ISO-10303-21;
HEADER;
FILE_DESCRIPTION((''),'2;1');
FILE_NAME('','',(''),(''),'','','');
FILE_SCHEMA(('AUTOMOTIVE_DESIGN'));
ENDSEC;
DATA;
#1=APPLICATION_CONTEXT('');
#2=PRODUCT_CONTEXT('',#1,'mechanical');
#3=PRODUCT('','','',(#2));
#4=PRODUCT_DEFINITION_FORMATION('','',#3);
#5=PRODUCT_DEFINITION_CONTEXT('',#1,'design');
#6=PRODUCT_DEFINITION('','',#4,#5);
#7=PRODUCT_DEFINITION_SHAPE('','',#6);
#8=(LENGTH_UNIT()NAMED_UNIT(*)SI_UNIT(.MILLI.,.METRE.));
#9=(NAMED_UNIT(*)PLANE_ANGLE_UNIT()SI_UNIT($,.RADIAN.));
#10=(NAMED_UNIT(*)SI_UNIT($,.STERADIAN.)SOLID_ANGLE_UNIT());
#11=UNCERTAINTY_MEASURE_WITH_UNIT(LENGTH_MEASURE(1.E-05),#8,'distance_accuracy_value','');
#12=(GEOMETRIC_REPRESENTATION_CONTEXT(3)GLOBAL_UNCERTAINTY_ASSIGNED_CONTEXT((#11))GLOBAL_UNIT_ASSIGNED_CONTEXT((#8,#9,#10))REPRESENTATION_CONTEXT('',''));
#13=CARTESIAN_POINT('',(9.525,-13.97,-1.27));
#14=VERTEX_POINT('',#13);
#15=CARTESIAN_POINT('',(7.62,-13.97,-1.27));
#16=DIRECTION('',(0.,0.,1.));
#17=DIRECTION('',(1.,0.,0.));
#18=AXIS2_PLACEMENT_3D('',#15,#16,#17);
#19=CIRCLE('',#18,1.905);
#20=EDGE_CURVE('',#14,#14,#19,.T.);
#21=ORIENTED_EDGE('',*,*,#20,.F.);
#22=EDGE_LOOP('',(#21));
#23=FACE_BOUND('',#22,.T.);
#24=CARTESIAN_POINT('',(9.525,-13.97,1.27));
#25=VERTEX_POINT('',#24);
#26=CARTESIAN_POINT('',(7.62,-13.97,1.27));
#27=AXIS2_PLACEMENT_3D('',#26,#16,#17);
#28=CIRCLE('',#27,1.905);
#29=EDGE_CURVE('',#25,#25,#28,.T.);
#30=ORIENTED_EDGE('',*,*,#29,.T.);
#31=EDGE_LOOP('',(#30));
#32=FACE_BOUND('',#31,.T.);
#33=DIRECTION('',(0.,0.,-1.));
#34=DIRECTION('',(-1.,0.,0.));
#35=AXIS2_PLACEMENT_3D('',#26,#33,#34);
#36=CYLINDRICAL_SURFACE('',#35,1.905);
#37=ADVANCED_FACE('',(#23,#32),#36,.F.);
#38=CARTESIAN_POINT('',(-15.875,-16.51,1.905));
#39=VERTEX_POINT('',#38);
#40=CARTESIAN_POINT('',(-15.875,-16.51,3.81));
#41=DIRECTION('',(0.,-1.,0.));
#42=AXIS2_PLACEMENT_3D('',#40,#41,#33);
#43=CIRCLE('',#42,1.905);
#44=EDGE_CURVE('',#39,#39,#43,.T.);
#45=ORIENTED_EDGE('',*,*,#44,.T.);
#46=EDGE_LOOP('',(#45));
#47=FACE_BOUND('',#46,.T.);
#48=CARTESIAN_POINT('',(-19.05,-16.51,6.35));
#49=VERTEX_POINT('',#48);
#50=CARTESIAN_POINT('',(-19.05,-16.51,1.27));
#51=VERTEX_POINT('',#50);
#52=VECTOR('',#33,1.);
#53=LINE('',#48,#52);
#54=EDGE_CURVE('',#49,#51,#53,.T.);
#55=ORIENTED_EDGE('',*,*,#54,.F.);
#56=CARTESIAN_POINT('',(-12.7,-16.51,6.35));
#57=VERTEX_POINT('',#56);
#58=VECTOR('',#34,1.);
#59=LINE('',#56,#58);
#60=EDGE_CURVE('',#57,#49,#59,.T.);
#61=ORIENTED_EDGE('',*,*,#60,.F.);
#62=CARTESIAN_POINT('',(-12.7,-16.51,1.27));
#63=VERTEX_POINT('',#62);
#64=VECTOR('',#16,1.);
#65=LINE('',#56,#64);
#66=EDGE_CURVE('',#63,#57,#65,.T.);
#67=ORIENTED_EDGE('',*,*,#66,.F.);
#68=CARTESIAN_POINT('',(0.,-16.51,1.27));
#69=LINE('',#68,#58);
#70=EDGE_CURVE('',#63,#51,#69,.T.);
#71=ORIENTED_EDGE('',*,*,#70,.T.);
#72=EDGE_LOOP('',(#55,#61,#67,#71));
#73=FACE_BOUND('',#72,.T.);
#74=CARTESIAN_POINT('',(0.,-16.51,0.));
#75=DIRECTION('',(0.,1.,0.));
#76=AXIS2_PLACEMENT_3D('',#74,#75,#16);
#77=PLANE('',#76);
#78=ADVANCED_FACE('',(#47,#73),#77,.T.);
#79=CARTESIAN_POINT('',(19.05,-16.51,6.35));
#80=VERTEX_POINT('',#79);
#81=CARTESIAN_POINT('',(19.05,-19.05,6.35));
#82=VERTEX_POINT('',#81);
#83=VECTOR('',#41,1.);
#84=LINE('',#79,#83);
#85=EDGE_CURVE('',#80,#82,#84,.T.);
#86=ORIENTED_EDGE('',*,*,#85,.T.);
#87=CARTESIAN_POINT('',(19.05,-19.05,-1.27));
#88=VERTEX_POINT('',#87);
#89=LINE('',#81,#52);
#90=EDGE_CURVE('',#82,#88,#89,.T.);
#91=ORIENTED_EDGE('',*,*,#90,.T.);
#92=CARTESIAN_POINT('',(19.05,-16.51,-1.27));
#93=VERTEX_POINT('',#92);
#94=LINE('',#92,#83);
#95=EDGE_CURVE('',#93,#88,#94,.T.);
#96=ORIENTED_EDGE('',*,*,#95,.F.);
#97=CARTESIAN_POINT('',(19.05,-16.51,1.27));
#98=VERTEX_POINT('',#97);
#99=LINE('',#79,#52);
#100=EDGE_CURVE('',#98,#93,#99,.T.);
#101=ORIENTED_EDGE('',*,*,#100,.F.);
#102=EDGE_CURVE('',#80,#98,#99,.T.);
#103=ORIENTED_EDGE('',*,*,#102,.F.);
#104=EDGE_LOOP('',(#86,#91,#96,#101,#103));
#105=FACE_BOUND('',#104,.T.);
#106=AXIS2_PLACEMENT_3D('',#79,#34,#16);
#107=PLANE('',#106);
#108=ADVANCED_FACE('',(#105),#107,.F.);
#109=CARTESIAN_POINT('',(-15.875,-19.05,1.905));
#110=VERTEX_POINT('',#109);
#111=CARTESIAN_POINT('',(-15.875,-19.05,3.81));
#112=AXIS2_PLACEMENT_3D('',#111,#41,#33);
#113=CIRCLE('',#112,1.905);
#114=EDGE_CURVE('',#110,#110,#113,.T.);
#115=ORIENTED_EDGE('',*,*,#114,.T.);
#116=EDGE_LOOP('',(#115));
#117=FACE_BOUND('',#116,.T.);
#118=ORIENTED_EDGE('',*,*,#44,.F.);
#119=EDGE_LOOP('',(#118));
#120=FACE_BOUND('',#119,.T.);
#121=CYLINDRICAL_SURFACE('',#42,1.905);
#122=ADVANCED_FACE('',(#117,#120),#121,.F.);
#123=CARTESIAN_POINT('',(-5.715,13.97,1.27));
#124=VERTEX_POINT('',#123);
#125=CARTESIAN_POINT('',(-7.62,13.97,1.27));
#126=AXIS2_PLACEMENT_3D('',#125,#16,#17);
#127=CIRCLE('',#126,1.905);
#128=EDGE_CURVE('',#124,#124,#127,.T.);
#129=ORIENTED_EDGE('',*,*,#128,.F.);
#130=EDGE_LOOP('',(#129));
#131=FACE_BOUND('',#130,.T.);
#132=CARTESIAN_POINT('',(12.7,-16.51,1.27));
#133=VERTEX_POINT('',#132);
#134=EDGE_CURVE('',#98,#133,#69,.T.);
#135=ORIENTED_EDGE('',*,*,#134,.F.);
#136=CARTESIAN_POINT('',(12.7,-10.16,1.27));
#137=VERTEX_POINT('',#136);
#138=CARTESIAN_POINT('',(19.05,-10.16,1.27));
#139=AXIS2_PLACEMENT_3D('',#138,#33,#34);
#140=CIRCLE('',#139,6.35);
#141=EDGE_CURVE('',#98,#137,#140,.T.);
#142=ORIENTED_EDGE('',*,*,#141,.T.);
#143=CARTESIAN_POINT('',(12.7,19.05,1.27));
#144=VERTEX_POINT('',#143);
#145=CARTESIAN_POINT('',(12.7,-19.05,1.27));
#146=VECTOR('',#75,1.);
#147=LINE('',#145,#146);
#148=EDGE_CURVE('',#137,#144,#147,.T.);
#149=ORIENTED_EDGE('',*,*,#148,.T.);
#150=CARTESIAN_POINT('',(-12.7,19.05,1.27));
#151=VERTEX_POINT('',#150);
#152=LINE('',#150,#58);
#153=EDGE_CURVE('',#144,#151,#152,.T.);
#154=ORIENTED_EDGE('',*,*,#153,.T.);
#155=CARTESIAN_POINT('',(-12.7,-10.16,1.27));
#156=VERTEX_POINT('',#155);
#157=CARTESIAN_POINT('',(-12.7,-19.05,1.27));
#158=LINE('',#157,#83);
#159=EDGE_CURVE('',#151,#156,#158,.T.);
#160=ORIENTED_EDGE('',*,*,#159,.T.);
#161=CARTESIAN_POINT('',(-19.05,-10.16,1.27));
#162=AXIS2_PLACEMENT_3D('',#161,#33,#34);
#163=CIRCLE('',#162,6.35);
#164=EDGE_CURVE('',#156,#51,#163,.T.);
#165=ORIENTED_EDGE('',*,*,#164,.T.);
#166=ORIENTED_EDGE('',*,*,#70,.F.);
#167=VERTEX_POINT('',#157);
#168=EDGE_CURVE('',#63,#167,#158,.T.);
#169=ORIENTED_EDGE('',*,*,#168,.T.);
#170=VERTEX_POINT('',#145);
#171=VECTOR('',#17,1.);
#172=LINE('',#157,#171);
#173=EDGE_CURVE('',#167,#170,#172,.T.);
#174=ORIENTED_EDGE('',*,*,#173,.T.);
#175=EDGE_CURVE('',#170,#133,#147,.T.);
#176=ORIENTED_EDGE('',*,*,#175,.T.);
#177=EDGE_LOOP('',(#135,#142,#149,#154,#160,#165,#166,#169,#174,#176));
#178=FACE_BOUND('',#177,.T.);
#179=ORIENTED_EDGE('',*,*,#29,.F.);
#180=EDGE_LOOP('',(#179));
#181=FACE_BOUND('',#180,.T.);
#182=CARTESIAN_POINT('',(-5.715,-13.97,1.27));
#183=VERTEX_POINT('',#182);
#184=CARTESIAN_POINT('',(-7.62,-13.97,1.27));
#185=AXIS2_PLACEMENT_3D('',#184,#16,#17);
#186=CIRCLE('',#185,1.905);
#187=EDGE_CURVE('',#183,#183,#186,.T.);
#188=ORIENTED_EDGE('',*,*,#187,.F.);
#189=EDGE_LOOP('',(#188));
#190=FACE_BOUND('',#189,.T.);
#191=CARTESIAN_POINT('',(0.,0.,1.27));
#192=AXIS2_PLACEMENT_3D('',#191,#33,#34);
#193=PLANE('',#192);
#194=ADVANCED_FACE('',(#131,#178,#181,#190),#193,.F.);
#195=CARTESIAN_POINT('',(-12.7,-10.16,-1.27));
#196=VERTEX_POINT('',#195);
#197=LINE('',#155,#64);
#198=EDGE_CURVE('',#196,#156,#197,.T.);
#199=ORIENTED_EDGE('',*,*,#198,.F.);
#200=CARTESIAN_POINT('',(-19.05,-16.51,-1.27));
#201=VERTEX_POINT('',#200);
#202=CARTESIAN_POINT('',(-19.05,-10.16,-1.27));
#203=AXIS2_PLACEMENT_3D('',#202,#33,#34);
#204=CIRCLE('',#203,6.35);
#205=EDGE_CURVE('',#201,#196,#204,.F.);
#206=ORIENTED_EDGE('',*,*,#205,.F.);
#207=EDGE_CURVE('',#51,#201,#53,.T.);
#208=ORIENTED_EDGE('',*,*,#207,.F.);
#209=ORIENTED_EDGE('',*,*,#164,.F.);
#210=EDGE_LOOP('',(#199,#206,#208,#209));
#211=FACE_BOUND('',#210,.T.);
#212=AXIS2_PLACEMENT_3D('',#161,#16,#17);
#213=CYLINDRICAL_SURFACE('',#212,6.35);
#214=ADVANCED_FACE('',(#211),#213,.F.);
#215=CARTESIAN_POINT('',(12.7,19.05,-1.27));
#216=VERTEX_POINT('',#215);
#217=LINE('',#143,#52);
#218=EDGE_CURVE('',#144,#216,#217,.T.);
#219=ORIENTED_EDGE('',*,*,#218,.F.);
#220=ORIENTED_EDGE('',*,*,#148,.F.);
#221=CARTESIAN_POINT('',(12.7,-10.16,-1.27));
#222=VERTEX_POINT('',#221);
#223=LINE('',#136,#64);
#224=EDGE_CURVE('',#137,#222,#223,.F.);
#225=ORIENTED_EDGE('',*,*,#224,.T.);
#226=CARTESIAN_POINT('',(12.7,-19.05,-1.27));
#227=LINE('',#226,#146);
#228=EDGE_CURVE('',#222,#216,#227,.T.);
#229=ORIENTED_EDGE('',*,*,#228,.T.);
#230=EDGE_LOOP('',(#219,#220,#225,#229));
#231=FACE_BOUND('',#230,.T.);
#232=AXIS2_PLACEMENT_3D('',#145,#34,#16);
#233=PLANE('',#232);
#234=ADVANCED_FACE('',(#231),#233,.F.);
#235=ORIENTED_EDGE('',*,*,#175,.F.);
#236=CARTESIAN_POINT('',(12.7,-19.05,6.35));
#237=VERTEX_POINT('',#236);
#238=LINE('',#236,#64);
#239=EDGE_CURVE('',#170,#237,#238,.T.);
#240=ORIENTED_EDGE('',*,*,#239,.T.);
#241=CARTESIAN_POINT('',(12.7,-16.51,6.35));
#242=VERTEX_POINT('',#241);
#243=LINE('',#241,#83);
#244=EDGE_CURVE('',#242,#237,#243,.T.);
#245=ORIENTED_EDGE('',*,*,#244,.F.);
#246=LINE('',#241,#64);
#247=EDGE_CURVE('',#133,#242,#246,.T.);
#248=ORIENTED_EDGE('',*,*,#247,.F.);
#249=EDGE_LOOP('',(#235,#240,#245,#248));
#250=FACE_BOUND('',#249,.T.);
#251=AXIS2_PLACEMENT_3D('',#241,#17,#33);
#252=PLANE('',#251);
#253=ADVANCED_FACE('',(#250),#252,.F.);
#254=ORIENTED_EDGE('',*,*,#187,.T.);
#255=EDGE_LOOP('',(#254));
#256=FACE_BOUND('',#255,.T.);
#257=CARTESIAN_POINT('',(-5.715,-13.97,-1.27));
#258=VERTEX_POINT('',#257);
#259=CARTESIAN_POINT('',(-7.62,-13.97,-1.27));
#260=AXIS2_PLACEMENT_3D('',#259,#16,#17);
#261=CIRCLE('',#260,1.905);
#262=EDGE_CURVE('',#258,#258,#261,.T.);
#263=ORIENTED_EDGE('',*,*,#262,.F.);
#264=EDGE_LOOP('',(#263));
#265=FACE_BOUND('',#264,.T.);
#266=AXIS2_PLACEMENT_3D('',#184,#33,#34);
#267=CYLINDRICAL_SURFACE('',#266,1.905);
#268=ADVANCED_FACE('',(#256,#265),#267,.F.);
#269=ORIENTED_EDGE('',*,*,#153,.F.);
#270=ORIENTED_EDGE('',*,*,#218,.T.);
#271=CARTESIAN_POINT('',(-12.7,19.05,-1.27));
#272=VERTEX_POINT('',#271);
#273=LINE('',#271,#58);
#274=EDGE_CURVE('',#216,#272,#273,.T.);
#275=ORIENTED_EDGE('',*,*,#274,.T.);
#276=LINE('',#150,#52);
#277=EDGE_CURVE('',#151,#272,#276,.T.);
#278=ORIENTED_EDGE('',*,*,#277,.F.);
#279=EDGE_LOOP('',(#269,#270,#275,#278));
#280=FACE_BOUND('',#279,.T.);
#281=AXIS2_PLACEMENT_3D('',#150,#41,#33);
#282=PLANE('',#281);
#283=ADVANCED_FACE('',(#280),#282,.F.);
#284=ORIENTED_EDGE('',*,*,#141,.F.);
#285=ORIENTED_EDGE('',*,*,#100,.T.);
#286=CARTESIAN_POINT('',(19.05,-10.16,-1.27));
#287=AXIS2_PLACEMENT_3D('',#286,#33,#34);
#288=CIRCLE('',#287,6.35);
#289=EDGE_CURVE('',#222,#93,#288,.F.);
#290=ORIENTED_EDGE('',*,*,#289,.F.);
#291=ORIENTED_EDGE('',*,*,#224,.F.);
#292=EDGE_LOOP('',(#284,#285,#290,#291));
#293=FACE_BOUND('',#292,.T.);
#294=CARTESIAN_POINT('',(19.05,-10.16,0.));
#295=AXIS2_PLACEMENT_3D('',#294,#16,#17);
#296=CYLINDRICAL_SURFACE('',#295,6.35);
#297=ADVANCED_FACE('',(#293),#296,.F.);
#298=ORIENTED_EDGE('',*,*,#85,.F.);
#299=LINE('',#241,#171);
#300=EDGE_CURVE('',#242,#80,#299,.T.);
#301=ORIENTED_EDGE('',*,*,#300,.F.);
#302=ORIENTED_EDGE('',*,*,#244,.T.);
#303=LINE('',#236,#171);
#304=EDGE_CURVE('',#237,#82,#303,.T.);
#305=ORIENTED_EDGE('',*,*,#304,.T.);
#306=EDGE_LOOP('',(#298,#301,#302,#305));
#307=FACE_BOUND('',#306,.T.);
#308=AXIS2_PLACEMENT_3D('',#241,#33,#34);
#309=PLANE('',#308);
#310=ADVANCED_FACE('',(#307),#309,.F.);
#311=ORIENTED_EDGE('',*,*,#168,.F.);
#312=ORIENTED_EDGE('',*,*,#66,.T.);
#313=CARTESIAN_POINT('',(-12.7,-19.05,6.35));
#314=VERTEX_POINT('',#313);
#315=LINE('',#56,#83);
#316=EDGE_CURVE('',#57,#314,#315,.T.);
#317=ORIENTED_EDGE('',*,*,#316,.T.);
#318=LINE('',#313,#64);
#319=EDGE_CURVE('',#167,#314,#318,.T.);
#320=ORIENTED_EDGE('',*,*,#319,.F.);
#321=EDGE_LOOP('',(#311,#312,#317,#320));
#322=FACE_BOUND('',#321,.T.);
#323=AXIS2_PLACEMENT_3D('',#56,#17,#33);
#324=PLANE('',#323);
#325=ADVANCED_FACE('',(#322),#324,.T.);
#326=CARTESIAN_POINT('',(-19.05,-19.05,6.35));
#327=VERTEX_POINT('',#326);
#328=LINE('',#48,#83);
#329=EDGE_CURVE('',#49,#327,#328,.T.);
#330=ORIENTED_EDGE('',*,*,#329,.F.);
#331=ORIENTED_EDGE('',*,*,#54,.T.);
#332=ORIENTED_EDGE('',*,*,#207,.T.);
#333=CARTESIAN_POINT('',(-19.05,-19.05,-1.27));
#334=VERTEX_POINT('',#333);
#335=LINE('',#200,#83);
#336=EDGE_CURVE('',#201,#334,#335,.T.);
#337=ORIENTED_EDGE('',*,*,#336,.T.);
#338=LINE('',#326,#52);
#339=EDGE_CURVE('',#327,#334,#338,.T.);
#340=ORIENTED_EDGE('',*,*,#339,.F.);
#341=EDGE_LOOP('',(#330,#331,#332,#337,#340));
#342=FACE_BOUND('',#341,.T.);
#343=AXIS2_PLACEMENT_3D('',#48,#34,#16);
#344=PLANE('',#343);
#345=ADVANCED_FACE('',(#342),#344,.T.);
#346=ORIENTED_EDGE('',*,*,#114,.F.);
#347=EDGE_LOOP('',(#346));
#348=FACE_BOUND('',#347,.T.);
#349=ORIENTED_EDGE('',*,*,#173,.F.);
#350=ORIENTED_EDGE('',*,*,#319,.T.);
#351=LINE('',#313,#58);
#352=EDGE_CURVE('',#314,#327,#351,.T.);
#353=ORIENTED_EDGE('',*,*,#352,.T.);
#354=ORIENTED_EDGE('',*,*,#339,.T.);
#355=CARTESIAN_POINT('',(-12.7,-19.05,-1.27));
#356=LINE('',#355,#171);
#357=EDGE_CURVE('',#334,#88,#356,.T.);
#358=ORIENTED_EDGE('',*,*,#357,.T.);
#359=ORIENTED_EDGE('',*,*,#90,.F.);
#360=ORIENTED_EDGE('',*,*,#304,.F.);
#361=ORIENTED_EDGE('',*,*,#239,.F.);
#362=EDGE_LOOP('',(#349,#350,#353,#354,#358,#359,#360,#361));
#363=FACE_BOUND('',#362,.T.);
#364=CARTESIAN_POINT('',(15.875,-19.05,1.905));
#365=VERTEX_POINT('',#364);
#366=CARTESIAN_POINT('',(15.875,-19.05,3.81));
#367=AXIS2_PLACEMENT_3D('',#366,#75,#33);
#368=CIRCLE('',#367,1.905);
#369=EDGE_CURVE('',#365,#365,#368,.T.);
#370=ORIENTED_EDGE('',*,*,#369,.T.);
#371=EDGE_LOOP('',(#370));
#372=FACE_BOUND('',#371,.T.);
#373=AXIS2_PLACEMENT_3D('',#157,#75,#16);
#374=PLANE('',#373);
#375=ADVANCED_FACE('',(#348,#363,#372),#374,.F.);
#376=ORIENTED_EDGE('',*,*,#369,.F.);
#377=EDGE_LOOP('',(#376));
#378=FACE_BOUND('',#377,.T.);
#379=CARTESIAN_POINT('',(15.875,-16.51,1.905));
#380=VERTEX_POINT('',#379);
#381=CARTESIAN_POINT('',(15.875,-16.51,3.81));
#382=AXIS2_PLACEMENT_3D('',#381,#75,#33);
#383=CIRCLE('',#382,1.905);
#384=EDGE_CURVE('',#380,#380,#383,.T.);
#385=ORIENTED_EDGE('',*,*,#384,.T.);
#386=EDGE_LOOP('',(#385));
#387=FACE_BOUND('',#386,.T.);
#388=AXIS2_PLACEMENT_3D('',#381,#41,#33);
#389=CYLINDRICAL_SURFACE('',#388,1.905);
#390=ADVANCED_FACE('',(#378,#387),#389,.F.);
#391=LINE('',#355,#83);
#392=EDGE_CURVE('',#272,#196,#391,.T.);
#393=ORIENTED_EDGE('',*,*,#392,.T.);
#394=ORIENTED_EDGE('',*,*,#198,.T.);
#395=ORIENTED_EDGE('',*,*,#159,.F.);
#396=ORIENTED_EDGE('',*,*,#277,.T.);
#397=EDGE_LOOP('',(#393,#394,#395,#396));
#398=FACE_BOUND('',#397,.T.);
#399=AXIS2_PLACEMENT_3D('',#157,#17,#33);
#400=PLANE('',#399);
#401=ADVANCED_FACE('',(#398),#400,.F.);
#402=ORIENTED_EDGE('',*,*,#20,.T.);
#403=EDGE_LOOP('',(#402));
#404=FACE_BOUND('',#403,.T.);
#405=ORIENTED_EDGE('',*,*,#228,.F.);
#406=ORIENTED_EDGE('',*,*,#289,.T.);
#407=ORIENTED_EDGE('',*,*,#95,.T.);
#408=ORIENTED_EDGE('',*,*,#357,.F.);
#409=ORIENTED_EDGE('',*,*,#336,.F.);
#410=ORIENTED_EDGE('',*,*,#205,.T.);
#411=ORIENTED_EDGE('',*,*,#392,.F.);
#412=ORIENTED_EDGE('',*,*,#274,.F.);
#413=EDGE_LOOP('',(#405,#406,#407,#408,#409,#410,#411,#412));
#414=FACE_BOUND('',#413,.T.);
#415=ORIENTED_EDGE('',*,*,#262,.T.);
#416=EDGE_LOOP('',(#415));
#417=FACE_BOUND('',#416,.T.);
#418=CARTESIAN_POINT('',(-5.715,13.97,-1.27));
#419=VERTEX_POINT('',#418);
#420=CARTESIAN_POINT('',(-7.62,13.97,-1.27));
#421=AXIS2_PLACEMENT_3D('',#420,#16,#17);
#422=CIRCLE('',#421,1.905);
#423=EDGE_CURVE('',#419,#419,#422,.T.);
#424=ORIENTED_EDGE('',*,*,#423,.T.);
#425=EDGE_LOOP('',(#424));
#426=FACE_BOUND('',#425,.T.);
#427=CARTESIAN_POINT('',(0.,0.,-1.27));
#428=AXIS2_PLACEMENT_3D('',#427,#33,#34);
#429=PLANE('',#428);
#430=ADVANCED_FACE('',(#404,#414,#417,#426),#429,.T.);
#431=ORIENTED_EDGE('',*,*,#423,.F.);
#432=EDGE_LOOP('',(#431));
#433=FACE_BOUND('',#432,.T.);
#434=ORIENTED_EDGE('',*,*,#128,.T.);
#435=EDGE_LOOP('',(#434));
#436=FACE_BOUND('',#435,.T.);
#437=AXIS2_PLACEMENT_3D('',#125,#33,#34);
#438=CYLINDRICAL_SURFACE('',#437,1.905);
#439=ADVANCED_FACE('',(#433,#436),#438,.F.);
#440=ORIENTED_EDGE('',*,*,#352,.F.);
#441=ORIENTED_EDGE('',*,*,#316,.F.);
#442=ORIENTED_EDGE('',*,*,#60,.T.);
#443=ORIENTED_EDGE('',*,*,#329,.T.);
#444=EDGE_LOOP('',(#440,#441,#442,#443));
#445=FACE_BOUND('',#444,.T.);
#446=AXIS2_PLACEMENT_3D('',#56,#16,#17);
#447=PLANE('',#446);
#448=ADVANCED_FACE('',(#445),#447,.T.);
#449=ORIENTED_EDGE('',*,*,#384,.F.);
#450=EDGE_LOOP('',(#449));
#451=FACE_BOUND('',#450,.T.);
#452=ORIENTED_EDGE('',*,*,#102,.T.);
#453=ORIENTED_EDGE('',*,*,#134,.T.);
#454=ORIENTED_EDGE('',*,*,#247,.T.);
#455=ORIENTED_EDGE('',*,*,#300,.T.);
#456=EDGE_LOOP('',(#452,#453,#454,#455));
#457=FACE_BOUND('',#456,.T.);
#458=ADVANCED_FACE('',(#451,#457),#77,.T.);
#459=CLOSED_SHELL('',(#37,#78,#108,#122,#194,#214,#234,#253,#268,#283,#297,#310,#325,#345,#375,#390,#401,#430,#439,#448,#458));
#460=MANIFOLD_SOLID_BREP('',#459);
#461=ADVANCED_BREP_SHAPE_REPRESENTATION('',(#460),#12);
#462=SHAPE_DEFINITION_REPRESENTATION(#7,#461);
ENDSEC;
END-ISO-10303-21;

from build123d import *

# Parameters (mm, degrees)
SKETCH1_W           = 25.4
SKETCH1_H           = 38.1
SKETCH1_R           = 1.905
BOSS_EXTRUDE1_DEPTH = 1.27
SKETCH2_W           = 6.35
SKETCH2_H           = 7.62
SKETCH2_R           = 1.905
BOSS_EXTRUDE2_DEPTH = 2.54
FILLET1_R           = 6.35


with BuildPart() as part:
    # Sketch1 → Boss-Extrude1 (new, symmetric)
    with BuildSketch(Plane.XY):
        Rectangle(SKETCH1_W, SKETCH1_H)
        with Locations((-7.62, 13.97)):
            Circle(SKETCH1_R, mode=Mode.SUBTRACT)
        with Locations((-7.62, -13.97)):
            Circle(SKETCH1_R, mode=Mode.SUBTRACT)
        with Locations((7.62, -13.97)):
            Circle(SKETCH1_R, mode=Mode.SUBTRACT)
    extrude(amount=BOSS_EXTRUDE1_DEPTH, both=True)

    # Sketch2 → Boss-Extrude2 (add)
    with BuildSketch(Plane.XZ.offset(19.05)):
        with Locations((-15.875, 2.54)):
            Rectangle(SKETCH2_W, SKETCH2_H)
        with Locations(Location((-15.875, 3.81, 0), (0, 0, 270))):
            Circle(SKETCH2_R, mode=Mode.SUBTRACT)
    boss_extrude2 = extrude(amount=-BOSS_EXTRUDE2_DEPTH)

    # Mirror5: Boss-Extrude2 across plane
    add(boss_extrude2.mirror(Plane(origin=(0, 0, 0), x_dir=(0, 0, 1), z_dir=(1, 0, 0))))

    # Fillet1
    fillet1_edges = [part.edges().sort_by_distance(p)[0] for p in [
        (-12.7, -16.51, 0),
        (12.7, -16.51, 0),
    ]]
    fillet(fillet1_edges, radius=FILLET1_R - 0.0001)  # a hair under: the kernel refuses the full size


solid = part.part
